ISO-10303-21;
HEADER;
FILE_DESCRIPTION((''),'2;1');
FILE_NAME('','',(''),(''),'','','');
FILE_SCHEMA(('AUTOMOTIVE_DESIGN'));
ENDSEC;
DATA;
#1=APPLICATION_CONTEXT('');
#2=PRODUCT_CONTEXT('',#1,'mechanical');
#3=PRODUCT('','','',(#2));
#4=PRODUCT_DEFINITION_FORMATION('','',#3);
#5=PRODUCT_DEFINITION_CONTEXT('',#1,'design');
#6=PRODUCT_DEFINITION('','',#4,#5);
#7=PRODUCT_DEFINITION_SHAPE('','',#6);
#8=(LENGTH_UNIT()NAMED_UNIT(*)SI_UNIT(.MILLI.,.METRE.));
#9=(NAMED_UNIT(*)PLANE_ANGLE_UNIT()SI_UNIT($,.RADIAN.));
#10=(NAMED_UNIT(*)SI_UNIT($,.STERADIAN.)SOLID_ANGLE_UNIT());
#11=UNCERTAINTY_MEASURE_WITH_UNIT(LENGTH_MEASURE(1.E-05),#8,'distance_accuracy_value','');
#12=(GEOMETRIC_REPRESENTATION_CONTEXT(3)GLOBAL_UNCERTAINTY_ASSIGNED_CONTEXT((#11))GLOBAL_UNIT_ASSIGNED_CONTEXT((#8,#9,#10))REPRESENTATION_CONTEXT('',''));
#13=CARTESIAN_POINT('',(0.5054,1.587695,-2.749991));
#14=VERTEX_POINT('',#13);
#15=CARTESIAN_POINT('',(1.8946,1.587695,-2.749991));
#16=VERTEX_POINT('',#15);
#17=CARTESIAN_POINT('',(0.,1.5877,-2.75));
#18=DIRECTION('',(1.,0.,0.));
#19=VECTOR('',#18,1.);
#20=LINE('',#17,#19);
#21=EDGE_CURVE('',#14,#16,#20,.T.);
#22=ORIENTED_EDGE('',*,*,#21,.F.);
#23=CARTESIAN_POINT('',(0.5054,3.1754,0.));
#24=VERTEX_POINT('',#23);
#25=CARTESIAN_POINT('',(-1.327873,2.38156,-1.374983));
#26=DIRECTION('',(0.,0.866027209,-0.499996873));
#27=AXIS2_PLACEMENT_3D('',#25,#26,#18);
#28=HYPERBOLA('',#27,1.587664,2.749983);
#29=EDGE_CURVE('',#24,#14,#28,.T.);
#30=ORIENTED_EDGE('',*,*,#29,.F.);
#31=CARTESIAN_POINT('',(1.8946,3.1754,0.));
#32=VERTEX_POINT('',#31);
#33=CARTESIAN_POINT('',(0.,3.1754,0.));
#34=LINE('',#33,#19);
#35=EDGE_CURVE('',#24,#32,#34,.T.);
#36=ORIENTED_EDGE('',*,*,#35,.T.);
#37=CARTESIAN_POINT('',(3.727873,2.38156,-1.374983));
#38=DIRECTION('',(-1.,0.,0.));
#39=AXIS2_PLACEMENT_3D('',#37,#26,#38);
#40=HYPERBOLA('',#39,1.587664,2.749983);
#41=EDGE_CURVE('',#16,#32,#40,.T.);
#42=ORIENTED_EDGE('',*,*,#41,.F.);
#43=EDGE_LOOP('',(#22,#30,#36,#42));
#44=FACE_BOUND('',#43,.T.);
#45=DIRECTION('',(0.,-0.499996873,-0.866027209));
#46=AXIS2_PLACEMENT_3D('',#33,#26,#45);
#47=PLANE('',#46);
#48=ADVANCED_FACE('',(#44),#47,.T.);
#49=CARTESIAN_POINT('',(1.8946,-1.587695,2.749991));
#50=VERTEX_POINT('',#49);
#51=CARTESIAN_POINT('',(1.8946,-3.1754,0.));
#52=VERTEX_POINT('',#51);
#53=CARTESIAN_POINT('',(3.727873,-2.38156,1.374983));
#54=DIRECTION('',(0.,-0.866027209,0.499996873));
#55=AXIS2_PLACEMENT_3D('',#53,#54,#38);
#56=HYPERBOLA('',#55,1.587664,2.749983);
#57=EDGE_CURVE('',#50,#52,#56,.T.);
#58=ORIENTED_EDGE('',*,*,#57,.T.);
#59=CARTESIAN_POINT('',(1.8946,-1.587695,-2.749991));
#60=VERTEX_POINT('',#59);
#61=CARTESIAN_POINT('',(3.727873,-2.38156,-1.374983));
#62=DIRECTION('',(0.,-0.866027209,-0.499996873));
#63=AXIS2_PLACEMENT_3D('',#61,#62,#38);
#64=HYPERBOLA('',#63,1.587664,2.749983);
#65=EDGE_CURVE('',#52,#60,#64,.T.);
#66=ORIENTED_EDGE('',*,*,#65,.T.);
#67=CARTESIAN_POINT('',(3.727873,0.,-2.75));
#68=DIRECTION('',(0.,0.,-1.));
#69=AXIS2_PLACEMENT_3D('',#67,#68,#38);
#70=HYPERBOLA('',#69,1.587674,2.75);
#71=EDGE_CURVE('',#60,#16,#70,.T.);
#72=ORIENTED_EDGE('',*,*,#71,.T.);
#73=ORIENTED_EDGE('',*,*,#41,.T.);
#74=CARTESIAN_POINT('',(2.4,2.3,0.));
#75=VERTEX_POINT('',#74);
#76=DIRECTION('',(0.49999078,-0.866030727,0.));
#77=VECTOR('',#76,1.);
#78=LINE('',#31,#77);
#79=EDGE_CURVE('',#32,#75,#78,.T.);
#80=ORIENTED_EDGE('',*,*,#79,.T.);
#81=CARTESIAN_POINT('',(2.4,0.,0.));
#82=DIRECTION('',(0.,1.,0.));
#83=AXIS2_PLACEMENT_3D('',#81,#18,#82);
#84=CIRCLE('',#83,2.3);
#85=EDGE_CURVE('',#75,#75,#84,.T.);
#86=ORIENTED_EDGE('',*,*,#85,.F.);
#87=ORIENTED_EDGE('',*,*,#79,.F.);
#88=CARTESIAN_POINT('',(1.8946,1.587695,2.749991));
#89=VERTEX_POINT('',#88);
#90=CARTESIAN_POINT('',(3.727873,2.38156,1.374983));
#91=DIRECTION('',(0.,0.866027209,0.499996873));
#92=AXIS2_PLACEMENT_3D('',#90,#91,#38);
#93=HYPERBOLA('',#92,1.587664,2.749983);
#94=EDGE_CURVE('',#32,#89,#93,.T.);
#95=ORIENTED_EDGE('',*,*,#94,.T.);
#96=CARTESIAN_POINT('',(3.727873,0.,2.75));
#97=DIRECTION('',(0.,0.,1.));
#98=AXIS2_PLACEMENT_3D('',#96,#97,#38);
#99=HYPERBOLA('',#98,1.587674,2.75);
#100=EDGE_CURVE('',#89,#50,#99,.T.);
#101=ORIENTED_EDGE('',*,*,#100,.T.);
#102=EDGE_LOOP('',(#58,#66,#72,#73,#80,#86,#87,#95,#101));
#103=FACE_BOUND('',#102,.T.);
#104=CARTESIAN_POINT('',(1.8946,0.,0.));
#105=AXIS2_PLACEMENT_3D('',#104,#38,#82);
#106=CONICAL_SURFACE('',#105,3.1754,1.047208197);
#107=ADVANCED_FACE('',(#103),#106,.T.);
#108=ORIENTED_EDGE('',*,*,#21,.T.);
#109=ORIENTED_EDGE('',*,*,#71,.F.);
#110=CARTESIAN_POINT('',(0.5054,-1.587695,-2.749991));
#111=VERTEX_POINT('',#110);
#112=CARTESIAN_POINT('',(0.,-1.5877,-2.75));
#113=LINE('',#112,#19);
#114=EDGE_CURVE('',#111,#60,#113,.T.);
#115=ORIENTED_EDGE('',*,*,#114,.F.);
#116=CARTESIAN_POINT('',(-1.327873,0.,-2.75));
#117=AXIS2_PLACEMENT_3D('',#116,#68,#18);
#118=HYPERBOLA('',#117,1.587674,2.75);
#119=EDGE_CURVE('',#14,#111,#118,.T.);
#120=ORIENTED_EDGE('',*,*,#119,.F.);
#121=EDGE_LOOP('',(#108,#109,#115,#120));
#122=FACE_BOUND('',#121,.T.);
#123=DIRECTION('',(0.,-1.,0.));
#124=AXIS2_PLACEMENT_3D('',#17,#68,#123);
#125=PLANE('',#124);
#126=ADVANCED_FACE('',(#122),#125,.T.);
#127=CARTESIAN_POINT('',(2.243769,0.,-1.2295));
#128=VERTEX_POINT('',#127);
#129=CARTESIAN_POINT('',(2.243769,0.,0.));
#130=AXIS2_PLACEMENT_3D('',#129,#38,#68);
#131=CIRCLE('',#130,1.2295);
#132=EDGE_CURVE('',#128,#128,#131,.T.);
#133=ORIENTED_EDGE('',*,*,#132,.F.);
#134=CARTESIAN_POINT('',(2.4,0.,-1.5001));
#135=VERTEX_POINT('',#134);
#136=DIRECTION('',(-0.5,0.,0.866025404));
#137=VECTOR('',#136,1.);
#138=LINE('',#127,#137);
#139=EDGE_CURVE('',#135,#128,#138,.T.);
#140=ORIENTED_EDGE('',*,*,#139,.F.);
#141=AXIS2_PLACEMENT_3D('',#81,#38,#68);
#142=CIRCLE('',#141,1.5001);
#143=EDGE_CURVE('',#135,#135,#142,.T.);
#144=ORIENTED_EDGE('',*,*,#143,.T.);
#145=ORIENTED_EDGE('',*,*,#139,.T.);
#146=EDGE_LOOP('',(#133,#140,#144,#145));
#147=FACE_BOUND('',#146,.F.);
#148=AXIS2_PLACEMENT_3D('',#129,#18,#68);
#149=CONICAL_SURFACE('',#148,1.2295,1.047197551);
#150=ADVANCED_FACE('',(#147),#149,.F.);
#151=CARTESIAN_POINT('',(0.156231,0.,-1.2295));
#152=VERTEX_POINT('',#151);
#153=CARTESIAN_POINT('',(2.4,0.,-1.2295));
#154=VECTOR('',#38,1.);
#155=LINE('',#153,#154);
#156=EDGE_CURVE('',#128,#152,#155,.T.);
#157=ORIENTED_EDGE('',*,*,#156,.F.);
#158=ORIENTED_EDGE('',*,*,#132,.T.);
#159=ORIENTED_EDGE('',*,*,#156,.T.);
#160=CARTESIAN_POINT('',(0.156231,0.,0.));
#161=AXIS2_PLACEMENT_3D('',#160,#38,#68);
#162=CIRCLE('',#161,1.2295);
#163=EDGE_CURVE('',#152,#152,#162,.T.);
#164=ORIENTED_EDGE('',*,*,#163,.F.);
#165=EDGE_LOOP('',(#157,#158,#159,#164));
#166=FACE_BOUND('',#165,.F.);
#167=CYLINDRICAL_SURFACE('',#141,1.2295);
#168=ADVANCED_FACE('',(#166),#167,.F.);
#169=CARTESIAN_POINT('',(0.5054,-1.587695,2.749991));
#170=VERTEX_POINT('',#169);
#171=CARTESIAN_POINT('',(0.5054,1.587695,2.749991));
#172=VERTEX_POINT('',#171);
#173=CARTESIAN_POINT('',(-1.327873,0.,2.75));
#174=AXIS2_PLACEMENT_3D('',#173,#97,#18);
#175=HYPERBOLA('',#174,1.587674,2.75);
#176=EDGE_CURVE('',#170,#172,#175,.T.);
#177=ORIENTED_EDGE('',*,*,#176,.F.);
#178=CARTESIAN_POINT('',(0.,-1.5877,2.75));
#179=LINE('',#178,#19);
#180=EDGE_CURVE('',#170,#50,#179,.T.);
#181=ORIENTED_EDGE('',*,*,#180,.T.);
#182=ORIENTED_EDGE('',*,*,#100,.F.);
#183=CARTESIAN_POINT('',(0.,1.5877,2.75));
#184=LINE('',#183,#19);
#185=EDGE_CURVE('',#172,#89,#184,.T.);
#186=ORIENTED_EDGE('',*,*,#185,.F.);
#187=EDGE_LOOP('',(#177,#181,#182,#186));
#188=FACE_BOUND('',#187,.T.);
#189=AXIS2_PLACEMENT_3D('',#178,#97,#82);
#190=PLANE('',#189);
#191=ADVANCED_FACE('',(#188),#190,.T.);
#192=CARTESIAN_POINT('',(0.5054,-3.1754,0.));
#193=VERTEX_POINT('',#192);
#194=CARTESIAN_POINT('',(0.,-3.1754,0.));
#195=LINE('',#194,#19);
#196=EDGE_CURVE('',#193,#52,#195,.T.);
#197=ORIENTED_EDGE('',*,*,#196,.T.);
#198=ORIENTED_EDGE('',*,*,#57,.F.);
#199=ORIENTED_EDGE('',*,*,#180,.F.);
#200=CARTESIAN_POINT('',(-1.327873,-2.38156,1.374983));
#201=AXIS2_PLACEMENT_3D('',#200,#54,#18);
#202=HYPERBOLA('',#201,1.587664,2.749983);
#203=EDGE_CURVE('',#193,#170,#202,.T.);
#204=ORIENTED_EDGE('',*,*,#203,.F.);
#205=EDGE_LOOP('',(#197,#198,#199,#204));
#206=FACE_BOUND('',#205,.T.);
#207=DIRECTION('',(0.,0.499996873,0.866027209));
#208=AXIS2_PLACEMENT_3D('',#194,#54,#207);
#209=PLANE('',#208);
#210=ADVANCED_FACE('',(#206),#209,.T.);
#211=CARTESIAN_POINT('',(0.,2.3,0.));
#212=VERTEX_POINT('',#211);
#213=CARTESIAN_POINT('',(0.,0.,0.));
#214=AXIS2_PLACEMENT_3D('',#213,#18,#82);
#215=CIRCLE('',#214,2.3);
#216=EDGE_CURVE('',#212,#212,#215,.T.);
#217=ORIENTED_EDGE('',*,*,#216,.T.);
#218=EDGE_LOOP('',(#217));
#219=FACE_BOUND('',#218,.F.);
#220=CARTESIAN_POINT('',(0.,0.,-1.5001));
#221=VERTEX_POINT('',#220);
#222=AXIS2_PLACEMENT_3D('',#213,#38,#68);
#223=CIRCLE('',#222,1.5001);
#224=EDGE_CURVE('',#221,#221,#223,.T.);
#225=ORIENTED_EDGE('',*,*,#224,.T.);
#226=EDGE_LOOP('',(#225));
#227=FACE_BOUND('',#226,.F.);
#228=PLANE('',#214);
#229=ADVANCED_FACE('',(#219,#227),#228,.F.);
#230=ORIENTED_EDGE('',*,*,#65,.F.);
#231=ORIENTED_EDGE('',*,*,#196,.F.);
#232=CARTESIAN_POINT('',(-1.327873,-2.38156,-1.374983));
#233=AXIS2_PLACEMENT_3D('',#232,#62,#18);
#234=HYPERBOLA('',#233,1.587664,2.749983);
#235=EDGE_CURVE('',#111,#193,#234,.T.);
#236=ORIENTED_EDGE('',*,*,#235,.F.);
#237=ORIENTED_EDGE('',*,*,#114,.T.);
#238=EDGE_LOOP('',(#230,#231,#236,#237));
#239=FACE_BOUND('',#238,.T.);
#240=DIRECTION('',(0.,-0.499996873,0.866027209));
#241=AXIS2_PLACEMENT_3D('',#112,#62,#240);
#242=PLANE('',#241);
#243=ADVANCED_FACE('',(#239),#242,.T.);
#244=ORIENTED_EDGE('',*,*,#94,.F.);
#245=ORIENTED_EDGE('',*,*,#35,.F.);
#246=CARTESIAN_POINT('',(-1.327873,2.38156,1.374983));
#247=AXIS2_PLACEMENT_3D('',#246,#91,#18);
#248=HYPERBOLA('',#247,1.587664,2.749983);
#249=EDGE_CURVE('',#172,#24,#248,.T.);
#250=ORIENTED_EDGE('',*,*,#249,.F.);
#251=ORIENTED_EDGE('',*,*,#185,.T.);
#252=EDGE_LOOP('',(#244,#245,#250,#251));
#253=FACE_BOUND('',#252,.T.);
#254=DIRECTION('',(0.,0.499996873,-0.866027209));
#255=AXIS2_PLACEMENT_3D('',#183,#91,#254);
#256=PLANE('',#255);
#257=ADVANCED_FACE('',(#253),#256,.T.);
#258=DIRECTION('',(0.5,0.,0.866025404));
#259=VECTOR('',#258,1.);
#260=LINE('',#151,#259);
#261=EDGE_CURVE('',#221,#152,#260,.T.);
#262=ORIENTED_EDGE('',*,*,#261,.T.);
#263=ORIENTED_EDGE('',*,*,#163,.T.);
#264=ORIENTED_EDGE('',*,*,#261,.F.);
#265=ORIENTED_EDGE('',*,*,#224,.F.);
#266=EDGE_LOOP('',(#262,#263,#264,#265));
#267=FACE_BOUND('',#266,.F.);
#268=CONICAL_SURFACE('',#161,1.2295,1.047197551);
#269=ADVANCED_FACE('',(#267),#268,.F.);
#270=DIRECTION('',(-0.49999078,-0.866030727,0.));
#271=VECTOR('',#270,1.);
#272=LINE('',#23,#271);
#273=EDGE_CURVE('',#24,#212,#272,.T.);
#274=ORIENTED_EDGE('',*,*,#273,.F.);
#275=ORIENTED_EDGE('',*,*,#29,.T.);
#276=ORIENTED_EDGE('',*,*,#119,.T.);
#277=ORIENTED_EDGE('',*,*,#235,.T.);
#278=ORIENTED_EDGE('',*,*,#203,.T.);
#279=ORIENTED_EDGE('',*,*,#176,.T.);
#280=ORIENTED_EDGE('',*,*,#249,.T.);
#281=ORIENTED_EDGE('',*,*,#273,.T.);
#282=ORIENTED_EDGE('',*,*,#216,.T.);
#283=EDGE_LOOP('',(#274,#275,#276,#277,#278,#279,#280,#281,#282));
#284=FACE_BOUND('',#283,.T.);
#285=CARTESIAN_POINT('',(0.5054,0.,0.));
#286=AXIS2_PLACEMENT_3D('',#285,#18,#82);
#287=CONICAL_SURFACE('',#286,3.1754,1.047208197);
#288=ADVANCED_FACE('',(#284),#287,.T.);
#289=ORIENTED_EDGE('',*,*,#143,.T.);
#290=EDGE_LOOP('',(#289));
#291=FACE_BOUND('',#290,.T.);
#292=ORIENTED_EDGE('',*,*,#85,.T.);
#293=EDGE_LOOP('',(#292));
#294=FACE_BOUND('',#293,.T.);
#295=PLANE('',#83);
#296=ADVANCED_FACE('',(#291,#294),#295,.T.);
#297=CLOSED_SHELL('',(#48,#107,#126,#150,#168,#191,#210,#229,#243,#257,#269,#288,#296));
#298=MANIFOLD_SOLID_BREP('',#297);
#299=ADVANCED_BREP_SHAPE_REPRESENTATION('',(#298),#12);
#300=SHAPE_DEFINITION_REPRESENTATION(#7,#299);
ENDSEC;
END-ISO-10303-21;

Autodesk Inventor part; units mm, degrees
ref_plane "YZ Plane" through (0, 0, 0) normal (1, 0, 0) x (0, 1, 0)
ref_plane "XZ Plane" through (0, 0, 0) normal (0, 1, 0) x (-1, 0, 0)
sketch "Sketch1" plane through (0, 0, 0) normal (1, 0, 0) x (0, 1, 0)
  line L0 (-3.1754, 0) -> (-1.5877, 2.75)
  line L1 (-1.5877, 2.75) -> (1.5877, 2.75)
  line L2 (1.5877, 2.75) -> (3.1754, 0)
  line L3 (3.1754, 0) -> (1.5877, -2.75)
  line L4 (1.5877, -2.75) -> (-1.5877, -2.75)
  line L5 (-1.5877, -2.75) -> (-3.1754, 0)
  point P0 (0, 0)
  point P1 (0, 0)
  dimension "d0" = 6.3509
extrude "Body" add sketch "Sketch1" along normal blind 2.4
sketch "Sketch2" plane through (0, 0, 0) normal (0, 0, 1) x (1, 0, 0)
  line L0 (0, 1.5877) -> (0, 3.1754) projected
  line L1 (0, 3.1754) -> (2.4, 3.1754) projected
  line L2 (2.4, 1.5877) -> (2.4, 3.1754) projected
  line L3 (-0.48, 0) -> (2.88, 0) projected
  line L4 (0.5054, 3.1754) -> (0, 2.3)
  line L5 (1.8946, 3.1754) -> (2.4, 2.3)
  dimension "d3" = 30
  dimension "d4" = 30
  dimension "d5" = 4.6
  dimension "d6" = 4.6
revolve "Chamfer1" cut sketch "Sketch2" angle 360 about axis through (-10, 0, 0) along (1, 0, 0)
sketch "Sketch3" plane through (2.4, 0, 0) normal (1, 0, 0) x (0, 0, -1)
  arc A0 (-0.625, -1.0825) -> (0.625, -1.0825) centre (0, 0) ccw projected
hole "Thread" at (2.4, 0, 0) direction (-1, 0, 0) diameter 2.459 end through all thread size "M3x0.5" class "6H" standard "ISO Metric profile"
chamfer "Chamfer2" distance 0.2706 angle 30 1 edges at (2.4, 0, 1.2295) measured on face at (2.4, 1.9179, -0.2329)
chamfer "Chamfer3" distance 0.2706 angle 30 1 edges at (0, 0, 1.2295) measured on face at (0, 1.9179, -0.2329)
ref_plane "Work Plane1" through (-6.3375, 0, 0) normal (0, -0.8660254, -0.5) x (1, 0, 0)
equation "\"d0\" = 1.1547 * SW"
equation "\"d1\" = KOH"
equation "\"d3\" = ANG1"
equation "\"d4\" = ANG2"
equation "\"d5\" = SW0"
equation "\"d6\" = SW01"
equation "\"d8\" = -0.5 * GD1 + 0.5 * NND"
equation "\"d40\" = -0.5 * GD1 + 0.5 * NND"
equation "\"d10\" = -0.5 * GD1 + 0.5 * NND"
equation "\"d41\" = -0.5 * GD1 + 0.5 * NND"
equation "\"ANG1\" = 30deg"
equation "\"ANG2\" = 30deg"
equation "\"NND\" = 3"
equation "\"KOH\" = 2.4"
equation "\"SW\" = 5.5"
equation "\"SW0\" = 4.6"
equation "\"SW01\" = SW0"
equation "\"GUL\" = 0.541266 * PTC"
equation "\"THREADDIA\" = 3"
equation "\"TOA\" = 30deg"
equation "\"PTC\" = 0.5"
equation "\"E0\" = 1.155 * SW"
equation "\"GAL\" = 0.541266 * PTC"
equation "\"GD1\" = 2.458734"
properties part number "11-3501" material "Steel"
